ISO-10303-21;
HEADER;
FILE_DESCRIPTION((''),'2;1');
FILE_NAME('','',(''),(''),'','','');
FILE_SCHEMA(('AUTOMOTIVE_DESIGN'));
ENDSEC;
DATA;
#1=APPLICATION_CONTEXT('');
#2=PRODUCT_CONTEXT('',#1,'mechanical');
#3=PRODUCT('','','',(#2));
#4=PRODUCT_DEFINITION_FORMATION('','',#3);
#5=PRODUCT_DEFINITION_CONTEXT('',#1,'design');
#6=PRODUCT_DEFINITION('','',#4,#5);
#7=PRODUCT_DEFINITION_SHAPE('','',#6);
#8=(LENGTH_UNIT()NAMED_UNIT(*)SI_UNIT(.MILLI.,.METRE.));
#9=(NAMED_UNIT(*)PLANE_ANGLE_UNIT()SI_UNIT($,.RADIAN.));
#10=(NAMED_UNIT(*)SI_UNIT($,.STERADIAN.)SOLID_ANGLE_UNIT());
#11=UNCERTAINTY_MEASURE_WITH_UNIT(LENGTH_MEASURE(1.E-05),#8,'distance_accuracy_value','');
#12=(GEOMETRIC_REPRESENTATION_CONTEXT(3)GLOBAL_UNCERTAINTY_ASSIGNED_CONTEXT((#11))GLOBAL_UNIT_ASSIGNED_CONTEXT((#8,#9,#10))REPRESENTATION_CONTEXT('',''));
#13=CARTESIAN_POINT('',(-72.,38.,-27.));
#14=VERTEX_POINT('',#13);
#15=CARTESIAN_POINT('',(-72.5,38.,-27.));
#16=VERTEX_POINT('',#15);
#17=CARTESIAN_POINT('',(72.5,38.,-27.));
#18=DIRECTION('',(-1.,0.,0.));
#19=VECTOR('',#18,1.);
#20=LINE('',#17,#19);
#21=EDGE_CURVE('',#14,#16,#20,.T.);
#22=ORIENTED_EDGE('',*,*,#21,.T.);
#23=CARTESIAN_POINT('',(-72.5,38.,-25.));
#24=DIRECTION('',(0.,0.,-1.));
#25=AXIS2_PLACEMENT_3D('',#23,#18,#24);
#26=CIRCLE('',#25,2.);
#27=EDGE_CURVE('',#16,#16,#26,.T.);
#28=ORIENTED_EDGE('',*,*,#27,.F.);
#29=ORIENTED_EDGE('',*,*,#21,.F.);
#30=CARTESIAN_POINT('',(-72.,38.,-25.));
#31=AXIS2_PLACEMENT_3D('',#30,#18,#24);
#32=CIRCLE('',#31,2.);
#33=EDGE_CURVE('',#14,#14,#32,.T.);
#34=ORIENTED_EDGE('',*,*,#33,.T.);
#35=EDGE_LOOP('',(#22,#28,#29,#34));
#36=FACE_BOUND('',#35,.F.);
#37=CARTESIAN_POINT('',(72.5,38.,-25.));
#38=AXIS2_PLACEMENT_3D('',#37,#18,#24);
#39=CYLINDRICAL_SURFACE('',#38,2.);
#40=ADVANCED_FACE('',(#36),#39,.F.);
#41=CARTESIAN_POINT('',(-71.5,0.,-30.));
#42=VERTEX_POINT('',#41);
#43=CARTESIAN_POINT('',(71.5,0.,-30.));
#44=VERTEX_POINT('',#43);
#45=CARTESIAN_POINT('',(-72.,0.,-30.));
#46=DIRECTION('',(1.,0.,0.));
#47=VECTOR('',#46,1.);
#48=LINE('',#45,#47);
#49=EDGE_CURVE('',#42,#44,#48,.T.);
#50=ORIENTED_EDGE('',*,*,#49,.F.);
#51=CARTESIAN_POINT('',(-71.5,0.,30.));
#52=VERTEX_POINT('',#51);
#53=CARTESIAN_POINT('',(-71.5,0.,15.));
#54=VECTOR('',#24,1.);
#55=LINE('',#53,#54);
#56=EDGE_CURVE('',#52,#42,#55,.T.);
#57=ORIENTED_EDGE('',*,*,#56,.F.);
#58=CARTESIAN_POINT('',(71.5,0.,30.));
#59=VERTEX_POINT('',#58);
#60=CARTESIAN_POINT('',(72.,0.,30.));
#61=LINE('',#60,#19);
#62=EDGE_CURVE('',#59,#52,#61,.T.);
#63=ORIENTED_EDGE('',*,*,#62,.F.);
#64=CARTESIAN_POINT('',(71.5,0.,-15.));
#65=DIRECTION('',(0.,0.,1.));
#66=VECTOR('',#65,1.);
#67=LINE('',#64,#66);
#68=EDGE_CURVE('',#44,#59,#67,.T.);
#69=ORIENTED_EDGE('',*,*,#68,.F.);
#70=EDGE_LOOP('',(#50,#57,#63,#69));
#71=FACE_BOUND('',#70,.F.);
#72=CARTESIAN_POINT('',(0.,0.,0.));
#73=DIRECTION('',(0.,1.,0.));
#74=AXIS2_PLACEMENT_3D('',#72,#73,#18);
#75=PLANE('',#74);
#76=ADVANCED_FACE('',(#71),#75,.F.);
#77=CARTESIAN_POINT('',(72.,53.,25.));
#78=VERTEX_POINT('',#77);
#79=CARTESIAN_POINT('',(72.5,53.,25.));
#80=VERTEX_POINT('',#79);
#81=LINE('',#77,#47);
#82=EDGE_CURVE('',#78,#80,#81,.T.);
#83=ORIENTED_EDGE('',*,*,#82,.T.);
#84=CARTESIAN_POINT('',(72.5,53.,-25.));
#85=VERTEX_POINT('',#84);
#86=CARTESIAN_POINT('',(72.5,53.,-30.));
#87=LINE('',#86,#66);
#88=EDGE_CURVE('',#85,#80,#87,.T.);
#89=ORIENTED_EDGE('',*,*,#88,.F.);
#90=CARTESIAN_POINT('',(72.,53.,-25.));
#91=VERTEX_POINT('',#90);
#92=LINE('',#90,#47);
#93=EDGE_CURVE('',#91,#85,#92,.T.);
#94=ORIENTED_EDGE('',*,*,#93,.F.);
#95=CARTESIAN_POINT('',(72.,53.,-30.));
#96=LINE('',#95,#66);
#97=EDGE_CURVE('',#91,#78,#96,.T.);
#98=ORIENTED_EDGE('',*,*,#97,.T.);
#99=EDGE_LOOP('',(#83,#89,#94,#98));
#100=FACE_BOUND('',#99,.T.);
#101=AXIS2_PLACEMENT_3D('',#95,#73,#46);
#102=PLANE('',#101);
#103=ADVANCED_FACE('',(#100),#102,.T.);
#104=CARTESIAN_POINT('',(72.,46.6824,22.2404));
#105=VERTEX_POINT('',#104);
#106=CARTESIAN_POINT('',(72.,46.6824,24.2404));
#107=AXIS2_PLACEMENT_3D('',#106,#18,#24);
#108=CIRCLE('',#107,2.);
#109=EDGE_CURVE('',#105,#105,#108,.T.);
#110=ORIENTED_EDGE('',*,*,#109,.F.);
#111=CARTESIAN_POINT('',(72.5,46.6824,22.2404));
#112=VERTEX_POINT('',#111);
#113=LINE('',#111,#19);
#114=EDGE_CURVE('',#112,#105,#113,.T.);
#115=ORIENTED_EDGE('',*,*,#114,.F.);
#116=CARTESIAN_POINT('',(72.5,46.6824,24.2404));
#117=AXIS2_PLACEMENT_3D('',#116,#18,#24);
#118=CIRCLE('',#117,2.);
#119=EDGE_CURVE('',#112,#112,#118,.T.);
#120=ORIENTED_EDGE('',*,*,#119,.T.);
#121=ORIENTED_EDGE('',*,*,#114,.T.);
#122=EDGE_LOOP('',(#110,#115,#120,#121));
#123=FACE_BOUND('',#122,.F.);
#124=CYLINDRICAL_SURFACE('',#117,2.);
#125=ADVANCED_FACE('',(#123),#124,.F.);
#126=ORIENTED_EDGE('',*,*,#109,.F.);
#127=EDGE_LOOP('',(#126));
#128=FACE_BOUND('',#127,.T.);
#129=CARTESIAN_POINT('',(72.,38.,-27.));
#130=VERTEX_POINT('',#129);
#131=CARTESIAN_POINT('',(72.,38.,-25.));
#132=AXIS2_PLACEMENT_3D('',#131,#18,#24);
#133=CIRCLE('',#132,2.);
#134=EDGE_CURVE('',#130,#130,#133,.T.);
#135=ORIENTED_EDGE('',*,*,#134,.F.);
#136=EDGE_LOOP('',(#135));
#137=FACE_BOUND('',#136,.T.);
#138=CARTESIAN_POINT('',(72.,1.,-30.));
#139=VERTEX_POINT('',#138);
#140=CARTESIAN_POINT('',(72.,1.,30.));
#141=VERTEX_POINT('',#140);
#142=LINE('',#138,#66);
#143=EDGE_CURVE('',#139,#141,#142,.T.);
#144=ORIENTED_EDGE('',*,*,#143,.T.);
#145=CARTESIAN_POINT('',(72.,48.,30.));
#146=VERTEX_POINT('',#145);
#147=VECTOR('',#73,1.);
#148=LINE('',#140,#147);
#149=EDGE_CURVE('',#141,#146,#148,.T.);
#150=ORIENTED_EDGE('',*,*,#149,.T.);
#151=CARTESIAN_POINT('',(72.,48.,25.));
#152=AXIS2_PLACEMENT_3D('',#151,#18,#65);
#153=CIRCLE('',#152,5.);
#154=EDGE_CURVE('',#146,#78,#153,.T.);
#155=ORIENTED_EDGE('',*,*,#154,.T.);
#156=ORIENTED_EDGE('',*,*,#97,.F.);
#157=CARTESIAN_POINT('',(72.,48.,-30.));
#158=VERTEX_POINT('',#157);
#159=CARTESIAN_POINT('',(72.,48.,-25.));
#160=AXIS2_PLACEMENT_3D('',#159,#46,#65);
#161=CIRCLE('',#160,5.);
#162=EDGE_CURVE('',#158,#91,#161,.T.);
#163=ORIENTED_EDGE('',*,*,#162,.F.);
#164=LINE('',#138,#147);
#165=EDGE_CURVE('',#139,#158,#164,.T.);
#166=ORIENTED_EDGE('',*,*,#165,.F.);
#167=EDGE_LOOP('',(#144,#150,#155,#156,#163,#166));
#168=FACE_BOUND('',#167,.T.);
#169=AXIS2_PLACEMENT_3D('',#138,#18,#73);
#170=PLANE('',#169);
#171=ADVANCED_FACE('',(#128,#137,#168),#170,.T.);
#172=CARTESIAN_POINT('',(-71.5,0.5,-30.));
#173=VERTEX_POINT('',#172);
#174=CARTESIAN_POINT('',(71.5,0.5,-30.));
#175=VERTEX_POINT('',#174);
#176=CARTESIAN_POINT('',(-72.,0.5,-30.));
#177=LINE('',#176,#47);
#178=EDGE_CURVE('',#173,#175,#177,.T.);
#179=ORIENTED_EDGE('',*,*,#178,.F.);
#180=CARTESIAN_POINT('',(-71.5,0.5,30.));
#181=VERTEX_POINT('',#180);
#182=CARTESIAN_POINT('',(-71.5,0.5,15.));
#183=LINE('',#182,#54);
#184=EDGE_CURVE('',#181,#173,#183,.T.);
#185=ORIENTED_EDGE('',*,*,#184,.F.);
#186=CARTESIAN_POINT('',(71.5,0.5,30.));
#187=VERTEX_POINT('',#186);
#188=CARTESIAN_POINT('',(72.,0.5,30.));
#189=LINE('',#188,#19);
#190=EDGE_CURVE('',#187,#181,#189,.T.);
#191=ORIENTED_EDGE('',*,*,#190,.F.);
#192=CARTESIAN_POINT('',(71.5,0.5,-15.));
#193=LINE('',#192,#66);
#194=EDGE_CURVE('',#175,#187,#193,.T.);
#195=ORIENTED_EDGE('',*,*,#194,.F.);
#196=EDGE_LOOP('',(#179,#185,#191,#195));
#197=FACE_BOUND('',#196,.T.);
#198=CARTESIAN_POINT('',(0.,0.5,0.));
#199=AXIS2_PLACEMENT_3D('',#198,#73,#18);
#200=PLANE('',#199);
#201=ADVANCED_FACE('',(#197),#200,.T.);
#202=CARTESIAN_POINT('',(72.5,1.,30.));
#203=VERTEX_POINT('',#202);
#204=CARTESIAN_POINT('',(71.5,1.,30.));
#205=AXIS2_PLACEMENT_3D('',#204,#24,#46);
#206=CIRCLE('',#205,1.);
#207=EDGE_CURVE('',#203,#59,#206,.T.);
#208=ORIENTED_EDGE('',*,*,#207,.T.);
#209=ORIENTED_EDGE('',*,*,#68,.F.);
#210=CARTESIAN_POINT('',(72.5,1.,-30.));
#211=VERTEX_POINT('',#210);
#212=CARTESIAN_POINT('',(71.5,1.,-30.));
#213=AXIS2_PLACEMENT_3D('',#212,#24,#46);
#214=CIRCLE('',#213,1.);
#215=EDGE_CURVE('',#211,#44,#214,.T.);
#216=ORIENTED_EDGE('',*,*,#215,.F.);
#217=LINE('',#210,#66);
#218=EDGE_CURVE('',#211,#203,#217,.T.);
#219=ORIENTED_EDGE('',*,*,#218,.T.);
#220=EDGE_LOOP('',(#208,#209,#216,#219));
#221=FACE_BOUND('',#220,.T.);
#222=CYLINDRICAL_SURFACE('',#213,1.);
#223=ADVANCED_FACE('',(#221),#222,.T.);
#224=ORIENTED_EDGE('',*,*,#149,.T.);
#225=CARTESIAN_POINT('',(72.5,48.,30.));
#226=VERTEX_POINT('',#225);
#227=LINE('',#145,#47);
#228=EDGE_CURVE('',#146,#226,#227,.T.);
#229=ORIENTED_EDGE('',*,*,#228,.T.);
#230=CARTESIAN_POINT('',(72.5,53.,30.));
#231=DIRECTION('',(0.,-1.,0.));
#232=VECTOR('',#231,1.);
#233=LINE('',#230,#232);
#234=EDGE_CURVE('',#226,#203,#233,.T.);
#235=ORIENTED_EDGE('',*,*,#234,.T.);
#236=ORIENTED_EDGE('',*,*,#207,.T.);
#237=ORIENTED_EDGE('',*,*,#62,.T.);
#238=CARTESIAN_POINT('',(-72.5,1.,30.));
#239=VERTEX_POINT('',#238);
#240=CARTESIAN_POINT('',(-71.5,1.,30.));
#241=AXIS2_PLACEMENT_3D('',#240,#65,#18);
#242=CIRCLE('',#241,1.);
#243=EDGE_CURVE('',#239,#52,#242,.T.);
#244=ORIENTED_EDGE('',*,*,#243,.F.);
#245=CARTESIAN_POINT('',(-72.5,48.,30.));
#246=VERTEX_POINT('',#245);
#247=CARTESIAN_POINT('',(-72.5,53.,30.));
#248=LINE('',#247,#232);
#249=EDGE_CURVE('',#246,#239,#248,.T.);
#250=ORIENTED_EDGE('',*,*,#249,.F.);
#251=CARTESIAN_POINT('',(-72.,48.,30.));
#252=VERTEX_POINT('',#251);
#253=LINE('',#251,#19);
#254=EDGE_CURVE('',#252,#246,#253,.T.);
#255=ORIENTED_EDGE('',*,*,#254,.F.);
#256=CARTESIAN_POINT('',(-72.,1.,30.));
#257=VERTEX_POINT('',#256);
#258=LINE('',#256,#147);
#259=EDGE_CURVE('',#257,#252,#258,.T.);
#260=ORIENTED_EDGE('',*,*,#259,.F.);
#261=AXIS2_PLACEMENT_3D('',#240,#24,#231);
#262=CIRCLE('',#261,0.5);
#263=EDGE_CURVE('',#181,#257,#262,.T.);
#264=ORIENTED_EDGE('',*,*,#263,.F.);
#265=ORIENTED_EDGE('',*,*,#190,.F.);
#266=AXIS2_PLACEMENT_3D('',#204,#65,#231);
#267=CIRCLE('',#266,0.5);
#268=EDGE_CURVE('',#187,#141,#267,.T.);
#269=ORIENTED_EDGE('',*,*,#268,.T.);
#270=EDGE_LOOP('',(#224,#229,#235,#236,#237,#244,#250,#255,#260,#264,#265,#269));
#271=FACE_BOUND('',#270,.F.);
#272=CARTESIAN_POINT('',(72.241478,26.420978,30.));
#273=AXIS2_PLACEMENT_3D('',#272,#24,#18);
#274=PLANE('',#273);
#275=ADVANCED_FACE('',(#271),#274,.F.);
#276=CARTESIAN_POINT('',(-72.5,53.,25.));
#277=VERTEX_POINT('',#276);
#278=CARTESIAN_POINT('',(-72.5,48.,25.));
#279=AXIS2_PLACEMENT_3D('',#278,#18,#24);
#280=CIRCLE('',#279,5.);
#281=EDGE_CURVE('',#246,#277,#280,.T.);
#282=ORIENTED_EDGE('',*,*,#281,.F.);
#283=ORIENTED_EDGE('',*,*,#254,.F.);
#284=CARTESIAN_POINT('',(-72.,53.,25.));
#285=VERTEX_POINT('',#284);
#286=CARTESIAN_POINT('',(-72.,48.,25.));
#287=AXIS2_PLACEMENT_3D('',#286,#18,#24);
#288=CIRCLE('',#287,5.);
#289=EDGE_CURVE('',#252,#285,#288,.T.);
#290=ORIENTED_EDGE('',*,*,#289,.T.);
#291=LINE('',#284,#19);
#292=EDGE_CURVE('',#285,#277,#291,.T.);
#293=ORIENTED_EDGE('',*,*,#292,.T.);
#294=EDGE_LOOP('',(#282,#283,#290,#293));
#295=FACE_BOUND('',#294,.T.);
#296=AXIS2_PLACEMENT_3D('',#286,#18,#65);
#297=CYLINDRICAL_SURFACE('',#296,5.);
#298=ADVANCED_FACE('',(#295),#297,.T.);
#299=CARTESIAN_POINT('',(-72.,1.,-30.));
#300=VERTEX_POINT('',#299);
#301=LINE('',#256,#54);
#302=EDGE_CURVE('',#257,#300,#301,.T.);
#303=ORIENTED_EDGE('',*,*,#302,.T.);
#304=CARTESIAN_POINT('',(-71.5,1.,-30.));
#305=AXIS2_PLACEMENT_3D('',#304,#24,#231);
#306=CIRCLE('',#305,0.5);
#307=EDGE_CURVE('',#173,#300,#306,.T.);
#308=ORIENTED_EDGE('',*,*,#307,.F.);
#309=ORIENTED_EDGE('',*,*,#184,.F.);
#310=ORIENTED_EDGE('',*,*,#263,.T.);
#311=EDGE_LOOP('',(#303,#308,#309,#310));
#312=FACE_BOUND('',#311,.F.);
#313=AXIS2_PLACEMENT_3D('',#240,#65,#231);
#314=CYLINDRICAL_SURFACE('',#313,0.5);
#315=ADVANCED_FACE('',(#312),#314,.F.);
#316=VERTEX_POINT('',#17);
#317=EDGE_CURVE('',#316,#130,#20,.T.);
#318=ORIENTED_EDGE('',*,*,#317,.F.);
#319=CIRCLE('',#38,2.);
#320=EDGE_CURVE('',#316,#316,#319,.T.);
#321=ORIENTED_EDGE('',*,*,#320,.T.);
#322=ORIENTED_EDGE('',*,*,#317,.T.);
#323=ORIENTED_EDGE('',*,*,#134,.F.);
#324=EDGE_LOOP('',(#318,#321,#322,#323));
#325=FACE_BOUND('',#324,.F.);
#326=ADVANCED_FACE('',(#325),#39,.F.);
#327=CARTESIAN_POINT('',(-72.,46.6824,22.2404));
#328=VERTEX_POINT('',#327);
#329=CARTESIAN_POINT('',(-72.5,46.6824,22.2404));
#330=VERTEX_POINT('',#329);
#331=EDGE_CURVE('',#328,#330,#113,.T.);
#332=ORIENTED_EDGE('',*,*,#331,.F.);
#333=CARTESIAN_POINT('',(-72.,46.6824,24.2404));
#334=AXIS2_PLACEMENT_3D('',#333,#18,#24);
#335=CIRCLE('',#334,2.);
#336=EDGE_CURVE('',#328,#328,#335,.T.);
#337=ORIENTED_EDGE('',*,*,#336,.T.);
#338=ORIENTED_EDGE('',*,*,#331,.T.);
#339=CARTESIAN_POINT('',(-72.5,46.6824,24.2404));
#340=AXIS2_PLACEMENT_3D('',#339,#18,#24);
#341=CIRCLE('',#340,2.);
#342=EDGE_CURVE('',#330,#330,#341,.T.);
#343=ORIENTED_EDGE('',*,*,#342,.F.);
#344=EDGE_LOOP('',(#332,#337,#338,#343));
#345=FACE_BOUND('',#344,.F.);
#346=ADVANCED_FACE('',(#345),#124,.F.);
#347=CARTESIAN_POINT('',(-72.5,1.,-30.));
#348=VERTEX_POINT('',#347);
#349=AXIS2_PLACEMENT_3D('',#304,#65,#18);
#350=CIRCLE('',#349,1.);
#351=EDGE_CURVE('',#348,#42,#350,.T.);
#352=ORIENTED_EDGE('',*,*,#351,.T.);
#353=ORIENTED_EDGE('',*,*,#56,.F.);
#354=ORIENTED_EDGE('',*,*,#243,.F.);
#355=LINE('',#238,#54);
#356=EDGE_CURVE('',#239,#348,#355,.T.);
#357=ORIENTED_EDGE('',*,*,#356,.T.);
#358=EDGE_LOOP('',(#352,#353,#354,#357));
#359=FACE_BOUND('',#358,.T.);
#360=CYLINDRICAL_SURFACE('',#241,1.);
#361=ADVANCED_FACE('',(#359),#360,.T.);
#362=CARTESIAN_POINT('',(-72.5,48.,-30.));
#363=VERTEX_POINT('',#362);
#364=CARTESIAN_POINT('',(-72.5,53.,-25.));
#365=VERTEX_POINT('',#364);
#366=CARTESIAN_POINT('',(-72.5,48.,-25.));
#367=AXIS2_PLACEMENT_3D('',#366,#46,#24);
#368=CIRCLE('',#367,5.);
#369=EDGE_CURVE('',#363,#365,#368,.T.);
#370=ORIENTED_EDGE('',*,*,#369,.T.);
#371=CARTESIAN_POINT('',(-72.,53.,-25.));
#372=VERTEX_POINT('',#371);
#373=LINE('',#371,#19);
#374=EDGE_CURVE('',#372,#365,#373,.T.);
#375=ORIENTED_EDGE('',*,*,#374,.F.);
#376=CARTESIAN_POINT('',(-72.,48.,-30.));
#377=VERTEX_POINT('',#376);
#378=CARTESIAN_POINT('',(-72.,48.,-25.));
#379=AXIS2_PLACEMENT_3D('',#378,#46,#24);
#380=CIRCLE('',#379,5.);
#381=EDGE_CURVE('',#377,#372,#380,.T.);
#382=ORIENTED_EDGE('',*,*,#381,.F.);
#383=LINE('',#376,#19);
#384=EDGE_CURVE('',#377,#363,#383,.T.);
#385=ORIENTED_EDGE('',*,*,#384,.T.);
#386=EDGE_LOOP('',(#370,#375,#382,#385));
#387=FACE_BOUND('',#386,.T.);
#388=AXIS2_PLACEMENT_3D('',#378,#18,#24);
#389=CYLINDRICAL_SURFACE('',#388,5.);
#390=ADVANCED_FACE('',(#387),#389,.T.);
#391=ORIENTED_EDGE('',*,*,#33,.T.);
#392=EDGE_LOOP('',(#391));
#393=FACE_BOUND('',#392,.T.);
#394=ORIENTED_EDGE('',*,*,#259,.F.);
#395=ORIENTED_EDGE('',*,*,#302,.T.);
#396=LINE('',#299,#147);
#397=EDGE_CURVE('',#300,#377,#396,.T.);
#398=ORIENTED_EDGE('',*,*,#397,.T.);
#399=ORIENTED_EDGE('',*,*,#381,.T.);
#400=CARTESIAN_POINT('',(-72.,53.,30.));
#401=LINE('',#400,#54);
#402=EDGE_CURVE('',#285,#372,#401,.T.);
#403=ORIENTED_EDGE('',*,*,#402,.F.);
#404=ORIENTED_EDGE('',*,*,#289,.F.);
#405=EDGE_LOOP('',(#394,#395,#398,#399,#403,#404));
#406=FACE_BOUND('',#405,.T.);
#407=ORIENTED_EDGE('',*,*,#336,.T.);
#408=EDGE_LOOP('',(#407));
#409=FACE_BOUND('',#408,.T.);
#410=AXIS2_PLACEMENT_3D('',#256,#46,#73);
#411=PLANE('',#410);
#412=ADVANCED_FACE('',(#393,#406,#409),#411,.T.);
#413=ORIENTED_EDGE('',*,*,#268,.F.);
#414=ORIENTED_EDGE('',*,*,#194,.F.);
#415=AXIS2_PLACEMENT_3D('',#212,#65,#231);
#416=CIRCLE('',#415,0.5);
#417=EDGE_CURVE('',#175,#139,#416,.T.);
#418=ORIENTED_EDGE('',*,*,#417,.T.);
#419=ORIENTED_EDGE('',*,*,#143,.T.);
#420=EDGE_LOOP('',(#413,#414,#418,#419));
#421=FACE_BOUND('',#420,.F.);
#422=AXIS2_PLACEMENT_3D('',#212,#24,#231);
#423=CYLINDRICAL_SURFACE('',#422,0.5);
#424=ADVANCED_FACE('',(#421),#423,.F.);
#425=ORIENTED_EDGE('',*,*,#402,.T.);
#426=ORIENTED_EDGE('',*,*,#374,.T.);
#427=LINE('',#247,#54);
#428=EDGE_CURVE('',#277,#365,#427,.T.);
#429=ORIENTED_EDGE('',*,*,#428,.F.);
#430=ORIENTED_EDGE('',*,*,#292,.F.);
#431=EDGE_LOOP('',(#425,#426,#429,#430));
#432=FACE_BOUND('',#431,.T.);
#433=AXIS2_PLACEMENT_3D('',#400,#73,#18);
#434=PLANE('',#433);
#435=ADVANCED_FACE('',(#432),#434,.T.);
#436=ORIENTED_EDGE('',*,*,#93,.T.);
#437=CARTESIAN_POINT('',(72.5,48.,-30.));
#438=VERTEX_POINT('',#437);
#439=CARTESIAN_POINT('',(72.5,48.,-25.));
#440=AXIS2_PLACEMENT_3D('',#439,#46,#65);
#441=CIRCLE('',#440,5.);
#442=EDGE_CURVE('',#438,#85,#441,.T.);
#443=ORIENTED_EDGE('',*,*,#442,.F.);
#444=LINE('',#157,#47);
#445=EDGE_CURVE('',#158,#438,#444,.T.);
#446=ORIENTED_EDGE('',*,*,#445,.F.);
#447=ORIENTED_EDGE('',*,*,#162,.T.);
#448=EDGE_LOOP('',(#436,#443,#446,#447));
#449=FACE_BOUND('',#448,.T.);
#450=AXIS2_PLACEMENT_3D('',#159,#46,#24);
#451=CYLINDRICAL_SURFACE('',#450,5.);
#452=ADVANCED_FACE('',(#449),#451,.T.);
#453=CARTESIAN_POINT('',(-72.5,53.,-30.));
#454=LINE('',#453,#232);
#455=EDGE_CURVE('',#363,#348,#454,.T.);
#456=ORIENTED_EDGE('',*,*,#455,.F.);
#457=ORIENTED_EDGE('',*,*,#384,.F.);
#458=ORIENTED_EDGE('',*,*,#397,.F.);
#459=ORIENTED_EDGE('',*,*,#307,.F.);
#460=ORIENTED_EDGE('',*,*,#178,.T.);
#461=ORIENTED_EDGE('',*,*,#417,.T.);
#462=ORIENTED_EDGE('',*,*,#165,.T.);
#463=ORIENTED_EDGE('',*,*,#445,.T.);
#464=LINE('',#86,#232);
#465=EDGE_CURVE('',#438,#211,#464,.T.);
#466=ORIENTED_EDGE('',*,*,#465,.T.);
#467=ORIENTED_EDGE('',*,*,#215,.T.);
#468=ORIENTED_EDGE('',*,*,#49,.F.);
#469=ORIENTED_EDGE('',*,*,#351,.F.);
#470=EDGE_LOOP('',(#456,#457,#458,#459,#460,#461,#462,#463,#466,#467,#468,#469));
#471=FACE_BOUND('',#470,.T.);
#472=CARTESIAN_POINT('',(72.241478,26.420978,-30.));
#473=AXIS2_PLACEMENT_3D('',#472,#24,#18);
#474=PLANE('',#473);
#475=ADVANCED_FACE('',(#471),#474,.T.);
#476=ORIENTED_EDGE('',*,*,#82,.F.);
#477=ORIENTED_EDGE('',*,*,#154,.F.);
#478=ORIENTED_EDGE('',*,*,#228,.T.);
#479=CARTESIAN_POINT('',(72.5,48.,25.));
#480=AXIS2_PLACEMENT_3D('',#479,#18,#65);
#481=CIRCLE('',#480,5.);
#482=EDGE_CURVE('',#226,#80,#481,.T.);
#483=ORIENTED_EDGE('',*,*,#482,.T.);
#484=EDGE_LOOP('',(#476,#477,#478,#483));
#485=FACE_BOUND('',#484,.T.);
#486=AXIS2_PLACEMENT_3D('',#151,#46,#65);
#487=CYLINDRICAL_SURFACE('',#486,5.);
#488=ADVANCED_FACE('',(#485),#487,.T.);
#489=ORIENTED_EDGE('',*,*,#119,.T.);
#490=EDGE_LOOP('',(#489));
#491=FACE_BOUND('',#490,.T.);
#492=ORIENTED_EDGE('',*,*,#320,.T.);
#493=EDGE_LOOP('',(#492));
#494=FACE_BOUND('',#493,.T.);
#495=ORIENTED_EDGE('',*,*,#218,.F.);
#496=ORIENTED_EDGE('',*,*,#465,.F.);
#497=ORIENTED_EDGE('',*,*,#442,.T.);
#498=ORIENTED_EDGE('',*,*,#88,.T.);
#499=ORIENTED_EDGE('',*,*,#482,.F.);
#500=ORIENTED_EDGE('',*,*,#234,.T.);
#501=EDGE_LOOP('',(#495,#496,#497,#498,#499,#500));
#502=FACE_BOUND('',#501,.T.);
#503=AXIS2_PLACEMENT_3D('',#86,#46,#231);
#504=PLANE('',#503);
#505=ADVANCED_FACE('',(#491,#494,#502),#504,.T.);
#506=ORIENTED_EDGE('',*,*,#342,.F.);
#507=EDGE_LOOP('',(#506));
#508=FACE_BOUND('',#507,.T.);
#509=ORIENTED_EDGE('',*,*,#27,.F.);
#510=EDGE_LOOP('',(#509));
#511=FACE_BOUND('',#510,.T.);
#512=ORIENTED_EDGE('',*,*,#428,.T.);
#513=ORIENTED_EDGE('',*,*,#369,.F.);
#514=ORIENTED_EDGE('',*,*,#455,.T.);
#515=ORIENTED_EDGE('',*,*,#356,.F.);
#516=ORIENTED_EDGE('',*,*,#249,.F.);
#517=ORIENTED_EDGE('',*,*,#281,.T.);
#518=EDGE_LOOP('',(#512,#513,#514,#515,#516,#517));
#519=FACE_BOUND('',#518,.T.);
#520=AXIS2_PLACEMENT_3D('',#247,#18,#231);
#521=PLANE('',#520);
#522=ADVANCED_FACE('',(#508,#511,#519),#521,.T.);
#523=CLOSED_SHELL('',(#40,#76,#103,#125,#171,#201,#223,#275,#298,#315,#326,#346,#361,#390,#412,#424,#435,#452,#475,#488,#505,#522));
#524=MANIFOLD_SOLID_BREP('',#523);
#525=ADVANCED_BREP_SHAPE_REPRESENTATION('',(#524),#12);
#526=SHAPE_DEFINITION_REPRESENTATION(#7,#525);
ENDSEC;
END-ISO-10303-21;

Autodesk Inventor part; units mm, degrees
ref_plane "YZ Plane" through (0, 0, 0) normal (1, 0, 0) x (0, 1, 0)
ref_plane "XZ Plane" through (0, 0, 0) normal (0, 1, 0) x (-1, 0, 0)
ref_plane "XY Plane" through (0, 0, 0) normal (0, 0, 1) x (1, 0, 0)
sketch "Sketch1" plane through (0, 0, 0) normal (0, 1, 0) x (-1, 0, 0)
  line L0 (-72, 30) -> (72, 30)
  line L1 (72, 30) -> (72, -30)
  line L2 (72, -30) -> (-72, -30)
  line L3 (-72, -30) -> (-72, 30)
  point P0 (0, 0)
  dimension "d0" = 144
  dimension "d1" = 60
  dimension "d2" = 72
  dimension "d3" = 30
extrude "Plate1" add sketch "Sketch1" along normal blind 0.5
sketch "Sketch3" plane through (72, 0.5, -30) normal (1, 0, 0) x (0, 1, 0)
  line L0 (0, 60) -> (0, 0)
  line L1 (0, 0) -> (52.5, 0)
  line L2 (52.5, 0) -> (52.5, 60)
  line L3 (52.5, 60) -> (0, 60)
edge flange "Flange1" height 53 angle 90 thickness 0.5 bend radius 0.5 thickness toward (1, 0, 0) relief tear relief width 0.5 relief depth 0.25 corner gap 0.5 corner form 0 edges at (72, 0.5, 0) (-72, 0.5, 0) wall of the first edge with corners at (72, 0.5, 30) (72, 0.5, -30) (72, 53, -30) (72, 53, 30)
bend "Bend1"
corner "Corner1"
fillet "Corner Round1" radius 5 4 edges at (-72.25, 53, -30) (-72.25, 53, 30) (72.25, 53, -30) (72.25, 53, 30)
sketch "Sketch4" plane through (72.5, 1, 30) normal (1, 0, 0) x (0, 0, -1)
  line L0 (5, 52) -> (55, 52) projected
  line L1 (60, 47) -> (60, 0) projected
  line L2 (5.7596, 45.6824) -> (55, 37) construction
  point P0 (30, -1)
  dimension "d19" = 5
  dimension "d20" = 15
  dimension "d21" = 50
  dimension "d22" = 10
hole "Hole1" at (72.5, 38, -25) at (72.5, 46.6824, 24.2404) direction (-1, 0, 0) diameter 4 end through all
equation "\"d28\" = Thickness"
equation "\"d8\" = BendReliefWidth"
equation "\"d9\" = BendReliefDepth"
equation "\"d10\" = MinimumRemnant"
equation "\"d11\" = BendRadius"
equation "\"d14\" = BendRadius"
equation "\"d15\" = CornerReliefSize"
equation "\"d16\" = GapSize"
equation "\"d17\" = JacobiRadiusSize"
equation "\"d2\" = 0.5 * d0"
equation "\"d3\" = 0.5 * d1"
equation "\"BendRadius\" = Thickness"
equation "\"BendReliefWidth\" = Thickness"
equation "\"BendReliefDepth\" = 0.5 * Thickness"
equation "\"CornerReliefSize\" = 4 * Thickness"
equation "\"MinimumRemnant\" = 2 * Thickness"
equation "\"TransitionRadius\" = BendRadius"
equation "\"JacobiRadiusSize\" = BendRadius"
equation "\"GapSize\" = Thickness"
equation "\"d4\" = BendRadius"
equation "\"Thickness\" = 0.5"
properties part number "radio_base"
